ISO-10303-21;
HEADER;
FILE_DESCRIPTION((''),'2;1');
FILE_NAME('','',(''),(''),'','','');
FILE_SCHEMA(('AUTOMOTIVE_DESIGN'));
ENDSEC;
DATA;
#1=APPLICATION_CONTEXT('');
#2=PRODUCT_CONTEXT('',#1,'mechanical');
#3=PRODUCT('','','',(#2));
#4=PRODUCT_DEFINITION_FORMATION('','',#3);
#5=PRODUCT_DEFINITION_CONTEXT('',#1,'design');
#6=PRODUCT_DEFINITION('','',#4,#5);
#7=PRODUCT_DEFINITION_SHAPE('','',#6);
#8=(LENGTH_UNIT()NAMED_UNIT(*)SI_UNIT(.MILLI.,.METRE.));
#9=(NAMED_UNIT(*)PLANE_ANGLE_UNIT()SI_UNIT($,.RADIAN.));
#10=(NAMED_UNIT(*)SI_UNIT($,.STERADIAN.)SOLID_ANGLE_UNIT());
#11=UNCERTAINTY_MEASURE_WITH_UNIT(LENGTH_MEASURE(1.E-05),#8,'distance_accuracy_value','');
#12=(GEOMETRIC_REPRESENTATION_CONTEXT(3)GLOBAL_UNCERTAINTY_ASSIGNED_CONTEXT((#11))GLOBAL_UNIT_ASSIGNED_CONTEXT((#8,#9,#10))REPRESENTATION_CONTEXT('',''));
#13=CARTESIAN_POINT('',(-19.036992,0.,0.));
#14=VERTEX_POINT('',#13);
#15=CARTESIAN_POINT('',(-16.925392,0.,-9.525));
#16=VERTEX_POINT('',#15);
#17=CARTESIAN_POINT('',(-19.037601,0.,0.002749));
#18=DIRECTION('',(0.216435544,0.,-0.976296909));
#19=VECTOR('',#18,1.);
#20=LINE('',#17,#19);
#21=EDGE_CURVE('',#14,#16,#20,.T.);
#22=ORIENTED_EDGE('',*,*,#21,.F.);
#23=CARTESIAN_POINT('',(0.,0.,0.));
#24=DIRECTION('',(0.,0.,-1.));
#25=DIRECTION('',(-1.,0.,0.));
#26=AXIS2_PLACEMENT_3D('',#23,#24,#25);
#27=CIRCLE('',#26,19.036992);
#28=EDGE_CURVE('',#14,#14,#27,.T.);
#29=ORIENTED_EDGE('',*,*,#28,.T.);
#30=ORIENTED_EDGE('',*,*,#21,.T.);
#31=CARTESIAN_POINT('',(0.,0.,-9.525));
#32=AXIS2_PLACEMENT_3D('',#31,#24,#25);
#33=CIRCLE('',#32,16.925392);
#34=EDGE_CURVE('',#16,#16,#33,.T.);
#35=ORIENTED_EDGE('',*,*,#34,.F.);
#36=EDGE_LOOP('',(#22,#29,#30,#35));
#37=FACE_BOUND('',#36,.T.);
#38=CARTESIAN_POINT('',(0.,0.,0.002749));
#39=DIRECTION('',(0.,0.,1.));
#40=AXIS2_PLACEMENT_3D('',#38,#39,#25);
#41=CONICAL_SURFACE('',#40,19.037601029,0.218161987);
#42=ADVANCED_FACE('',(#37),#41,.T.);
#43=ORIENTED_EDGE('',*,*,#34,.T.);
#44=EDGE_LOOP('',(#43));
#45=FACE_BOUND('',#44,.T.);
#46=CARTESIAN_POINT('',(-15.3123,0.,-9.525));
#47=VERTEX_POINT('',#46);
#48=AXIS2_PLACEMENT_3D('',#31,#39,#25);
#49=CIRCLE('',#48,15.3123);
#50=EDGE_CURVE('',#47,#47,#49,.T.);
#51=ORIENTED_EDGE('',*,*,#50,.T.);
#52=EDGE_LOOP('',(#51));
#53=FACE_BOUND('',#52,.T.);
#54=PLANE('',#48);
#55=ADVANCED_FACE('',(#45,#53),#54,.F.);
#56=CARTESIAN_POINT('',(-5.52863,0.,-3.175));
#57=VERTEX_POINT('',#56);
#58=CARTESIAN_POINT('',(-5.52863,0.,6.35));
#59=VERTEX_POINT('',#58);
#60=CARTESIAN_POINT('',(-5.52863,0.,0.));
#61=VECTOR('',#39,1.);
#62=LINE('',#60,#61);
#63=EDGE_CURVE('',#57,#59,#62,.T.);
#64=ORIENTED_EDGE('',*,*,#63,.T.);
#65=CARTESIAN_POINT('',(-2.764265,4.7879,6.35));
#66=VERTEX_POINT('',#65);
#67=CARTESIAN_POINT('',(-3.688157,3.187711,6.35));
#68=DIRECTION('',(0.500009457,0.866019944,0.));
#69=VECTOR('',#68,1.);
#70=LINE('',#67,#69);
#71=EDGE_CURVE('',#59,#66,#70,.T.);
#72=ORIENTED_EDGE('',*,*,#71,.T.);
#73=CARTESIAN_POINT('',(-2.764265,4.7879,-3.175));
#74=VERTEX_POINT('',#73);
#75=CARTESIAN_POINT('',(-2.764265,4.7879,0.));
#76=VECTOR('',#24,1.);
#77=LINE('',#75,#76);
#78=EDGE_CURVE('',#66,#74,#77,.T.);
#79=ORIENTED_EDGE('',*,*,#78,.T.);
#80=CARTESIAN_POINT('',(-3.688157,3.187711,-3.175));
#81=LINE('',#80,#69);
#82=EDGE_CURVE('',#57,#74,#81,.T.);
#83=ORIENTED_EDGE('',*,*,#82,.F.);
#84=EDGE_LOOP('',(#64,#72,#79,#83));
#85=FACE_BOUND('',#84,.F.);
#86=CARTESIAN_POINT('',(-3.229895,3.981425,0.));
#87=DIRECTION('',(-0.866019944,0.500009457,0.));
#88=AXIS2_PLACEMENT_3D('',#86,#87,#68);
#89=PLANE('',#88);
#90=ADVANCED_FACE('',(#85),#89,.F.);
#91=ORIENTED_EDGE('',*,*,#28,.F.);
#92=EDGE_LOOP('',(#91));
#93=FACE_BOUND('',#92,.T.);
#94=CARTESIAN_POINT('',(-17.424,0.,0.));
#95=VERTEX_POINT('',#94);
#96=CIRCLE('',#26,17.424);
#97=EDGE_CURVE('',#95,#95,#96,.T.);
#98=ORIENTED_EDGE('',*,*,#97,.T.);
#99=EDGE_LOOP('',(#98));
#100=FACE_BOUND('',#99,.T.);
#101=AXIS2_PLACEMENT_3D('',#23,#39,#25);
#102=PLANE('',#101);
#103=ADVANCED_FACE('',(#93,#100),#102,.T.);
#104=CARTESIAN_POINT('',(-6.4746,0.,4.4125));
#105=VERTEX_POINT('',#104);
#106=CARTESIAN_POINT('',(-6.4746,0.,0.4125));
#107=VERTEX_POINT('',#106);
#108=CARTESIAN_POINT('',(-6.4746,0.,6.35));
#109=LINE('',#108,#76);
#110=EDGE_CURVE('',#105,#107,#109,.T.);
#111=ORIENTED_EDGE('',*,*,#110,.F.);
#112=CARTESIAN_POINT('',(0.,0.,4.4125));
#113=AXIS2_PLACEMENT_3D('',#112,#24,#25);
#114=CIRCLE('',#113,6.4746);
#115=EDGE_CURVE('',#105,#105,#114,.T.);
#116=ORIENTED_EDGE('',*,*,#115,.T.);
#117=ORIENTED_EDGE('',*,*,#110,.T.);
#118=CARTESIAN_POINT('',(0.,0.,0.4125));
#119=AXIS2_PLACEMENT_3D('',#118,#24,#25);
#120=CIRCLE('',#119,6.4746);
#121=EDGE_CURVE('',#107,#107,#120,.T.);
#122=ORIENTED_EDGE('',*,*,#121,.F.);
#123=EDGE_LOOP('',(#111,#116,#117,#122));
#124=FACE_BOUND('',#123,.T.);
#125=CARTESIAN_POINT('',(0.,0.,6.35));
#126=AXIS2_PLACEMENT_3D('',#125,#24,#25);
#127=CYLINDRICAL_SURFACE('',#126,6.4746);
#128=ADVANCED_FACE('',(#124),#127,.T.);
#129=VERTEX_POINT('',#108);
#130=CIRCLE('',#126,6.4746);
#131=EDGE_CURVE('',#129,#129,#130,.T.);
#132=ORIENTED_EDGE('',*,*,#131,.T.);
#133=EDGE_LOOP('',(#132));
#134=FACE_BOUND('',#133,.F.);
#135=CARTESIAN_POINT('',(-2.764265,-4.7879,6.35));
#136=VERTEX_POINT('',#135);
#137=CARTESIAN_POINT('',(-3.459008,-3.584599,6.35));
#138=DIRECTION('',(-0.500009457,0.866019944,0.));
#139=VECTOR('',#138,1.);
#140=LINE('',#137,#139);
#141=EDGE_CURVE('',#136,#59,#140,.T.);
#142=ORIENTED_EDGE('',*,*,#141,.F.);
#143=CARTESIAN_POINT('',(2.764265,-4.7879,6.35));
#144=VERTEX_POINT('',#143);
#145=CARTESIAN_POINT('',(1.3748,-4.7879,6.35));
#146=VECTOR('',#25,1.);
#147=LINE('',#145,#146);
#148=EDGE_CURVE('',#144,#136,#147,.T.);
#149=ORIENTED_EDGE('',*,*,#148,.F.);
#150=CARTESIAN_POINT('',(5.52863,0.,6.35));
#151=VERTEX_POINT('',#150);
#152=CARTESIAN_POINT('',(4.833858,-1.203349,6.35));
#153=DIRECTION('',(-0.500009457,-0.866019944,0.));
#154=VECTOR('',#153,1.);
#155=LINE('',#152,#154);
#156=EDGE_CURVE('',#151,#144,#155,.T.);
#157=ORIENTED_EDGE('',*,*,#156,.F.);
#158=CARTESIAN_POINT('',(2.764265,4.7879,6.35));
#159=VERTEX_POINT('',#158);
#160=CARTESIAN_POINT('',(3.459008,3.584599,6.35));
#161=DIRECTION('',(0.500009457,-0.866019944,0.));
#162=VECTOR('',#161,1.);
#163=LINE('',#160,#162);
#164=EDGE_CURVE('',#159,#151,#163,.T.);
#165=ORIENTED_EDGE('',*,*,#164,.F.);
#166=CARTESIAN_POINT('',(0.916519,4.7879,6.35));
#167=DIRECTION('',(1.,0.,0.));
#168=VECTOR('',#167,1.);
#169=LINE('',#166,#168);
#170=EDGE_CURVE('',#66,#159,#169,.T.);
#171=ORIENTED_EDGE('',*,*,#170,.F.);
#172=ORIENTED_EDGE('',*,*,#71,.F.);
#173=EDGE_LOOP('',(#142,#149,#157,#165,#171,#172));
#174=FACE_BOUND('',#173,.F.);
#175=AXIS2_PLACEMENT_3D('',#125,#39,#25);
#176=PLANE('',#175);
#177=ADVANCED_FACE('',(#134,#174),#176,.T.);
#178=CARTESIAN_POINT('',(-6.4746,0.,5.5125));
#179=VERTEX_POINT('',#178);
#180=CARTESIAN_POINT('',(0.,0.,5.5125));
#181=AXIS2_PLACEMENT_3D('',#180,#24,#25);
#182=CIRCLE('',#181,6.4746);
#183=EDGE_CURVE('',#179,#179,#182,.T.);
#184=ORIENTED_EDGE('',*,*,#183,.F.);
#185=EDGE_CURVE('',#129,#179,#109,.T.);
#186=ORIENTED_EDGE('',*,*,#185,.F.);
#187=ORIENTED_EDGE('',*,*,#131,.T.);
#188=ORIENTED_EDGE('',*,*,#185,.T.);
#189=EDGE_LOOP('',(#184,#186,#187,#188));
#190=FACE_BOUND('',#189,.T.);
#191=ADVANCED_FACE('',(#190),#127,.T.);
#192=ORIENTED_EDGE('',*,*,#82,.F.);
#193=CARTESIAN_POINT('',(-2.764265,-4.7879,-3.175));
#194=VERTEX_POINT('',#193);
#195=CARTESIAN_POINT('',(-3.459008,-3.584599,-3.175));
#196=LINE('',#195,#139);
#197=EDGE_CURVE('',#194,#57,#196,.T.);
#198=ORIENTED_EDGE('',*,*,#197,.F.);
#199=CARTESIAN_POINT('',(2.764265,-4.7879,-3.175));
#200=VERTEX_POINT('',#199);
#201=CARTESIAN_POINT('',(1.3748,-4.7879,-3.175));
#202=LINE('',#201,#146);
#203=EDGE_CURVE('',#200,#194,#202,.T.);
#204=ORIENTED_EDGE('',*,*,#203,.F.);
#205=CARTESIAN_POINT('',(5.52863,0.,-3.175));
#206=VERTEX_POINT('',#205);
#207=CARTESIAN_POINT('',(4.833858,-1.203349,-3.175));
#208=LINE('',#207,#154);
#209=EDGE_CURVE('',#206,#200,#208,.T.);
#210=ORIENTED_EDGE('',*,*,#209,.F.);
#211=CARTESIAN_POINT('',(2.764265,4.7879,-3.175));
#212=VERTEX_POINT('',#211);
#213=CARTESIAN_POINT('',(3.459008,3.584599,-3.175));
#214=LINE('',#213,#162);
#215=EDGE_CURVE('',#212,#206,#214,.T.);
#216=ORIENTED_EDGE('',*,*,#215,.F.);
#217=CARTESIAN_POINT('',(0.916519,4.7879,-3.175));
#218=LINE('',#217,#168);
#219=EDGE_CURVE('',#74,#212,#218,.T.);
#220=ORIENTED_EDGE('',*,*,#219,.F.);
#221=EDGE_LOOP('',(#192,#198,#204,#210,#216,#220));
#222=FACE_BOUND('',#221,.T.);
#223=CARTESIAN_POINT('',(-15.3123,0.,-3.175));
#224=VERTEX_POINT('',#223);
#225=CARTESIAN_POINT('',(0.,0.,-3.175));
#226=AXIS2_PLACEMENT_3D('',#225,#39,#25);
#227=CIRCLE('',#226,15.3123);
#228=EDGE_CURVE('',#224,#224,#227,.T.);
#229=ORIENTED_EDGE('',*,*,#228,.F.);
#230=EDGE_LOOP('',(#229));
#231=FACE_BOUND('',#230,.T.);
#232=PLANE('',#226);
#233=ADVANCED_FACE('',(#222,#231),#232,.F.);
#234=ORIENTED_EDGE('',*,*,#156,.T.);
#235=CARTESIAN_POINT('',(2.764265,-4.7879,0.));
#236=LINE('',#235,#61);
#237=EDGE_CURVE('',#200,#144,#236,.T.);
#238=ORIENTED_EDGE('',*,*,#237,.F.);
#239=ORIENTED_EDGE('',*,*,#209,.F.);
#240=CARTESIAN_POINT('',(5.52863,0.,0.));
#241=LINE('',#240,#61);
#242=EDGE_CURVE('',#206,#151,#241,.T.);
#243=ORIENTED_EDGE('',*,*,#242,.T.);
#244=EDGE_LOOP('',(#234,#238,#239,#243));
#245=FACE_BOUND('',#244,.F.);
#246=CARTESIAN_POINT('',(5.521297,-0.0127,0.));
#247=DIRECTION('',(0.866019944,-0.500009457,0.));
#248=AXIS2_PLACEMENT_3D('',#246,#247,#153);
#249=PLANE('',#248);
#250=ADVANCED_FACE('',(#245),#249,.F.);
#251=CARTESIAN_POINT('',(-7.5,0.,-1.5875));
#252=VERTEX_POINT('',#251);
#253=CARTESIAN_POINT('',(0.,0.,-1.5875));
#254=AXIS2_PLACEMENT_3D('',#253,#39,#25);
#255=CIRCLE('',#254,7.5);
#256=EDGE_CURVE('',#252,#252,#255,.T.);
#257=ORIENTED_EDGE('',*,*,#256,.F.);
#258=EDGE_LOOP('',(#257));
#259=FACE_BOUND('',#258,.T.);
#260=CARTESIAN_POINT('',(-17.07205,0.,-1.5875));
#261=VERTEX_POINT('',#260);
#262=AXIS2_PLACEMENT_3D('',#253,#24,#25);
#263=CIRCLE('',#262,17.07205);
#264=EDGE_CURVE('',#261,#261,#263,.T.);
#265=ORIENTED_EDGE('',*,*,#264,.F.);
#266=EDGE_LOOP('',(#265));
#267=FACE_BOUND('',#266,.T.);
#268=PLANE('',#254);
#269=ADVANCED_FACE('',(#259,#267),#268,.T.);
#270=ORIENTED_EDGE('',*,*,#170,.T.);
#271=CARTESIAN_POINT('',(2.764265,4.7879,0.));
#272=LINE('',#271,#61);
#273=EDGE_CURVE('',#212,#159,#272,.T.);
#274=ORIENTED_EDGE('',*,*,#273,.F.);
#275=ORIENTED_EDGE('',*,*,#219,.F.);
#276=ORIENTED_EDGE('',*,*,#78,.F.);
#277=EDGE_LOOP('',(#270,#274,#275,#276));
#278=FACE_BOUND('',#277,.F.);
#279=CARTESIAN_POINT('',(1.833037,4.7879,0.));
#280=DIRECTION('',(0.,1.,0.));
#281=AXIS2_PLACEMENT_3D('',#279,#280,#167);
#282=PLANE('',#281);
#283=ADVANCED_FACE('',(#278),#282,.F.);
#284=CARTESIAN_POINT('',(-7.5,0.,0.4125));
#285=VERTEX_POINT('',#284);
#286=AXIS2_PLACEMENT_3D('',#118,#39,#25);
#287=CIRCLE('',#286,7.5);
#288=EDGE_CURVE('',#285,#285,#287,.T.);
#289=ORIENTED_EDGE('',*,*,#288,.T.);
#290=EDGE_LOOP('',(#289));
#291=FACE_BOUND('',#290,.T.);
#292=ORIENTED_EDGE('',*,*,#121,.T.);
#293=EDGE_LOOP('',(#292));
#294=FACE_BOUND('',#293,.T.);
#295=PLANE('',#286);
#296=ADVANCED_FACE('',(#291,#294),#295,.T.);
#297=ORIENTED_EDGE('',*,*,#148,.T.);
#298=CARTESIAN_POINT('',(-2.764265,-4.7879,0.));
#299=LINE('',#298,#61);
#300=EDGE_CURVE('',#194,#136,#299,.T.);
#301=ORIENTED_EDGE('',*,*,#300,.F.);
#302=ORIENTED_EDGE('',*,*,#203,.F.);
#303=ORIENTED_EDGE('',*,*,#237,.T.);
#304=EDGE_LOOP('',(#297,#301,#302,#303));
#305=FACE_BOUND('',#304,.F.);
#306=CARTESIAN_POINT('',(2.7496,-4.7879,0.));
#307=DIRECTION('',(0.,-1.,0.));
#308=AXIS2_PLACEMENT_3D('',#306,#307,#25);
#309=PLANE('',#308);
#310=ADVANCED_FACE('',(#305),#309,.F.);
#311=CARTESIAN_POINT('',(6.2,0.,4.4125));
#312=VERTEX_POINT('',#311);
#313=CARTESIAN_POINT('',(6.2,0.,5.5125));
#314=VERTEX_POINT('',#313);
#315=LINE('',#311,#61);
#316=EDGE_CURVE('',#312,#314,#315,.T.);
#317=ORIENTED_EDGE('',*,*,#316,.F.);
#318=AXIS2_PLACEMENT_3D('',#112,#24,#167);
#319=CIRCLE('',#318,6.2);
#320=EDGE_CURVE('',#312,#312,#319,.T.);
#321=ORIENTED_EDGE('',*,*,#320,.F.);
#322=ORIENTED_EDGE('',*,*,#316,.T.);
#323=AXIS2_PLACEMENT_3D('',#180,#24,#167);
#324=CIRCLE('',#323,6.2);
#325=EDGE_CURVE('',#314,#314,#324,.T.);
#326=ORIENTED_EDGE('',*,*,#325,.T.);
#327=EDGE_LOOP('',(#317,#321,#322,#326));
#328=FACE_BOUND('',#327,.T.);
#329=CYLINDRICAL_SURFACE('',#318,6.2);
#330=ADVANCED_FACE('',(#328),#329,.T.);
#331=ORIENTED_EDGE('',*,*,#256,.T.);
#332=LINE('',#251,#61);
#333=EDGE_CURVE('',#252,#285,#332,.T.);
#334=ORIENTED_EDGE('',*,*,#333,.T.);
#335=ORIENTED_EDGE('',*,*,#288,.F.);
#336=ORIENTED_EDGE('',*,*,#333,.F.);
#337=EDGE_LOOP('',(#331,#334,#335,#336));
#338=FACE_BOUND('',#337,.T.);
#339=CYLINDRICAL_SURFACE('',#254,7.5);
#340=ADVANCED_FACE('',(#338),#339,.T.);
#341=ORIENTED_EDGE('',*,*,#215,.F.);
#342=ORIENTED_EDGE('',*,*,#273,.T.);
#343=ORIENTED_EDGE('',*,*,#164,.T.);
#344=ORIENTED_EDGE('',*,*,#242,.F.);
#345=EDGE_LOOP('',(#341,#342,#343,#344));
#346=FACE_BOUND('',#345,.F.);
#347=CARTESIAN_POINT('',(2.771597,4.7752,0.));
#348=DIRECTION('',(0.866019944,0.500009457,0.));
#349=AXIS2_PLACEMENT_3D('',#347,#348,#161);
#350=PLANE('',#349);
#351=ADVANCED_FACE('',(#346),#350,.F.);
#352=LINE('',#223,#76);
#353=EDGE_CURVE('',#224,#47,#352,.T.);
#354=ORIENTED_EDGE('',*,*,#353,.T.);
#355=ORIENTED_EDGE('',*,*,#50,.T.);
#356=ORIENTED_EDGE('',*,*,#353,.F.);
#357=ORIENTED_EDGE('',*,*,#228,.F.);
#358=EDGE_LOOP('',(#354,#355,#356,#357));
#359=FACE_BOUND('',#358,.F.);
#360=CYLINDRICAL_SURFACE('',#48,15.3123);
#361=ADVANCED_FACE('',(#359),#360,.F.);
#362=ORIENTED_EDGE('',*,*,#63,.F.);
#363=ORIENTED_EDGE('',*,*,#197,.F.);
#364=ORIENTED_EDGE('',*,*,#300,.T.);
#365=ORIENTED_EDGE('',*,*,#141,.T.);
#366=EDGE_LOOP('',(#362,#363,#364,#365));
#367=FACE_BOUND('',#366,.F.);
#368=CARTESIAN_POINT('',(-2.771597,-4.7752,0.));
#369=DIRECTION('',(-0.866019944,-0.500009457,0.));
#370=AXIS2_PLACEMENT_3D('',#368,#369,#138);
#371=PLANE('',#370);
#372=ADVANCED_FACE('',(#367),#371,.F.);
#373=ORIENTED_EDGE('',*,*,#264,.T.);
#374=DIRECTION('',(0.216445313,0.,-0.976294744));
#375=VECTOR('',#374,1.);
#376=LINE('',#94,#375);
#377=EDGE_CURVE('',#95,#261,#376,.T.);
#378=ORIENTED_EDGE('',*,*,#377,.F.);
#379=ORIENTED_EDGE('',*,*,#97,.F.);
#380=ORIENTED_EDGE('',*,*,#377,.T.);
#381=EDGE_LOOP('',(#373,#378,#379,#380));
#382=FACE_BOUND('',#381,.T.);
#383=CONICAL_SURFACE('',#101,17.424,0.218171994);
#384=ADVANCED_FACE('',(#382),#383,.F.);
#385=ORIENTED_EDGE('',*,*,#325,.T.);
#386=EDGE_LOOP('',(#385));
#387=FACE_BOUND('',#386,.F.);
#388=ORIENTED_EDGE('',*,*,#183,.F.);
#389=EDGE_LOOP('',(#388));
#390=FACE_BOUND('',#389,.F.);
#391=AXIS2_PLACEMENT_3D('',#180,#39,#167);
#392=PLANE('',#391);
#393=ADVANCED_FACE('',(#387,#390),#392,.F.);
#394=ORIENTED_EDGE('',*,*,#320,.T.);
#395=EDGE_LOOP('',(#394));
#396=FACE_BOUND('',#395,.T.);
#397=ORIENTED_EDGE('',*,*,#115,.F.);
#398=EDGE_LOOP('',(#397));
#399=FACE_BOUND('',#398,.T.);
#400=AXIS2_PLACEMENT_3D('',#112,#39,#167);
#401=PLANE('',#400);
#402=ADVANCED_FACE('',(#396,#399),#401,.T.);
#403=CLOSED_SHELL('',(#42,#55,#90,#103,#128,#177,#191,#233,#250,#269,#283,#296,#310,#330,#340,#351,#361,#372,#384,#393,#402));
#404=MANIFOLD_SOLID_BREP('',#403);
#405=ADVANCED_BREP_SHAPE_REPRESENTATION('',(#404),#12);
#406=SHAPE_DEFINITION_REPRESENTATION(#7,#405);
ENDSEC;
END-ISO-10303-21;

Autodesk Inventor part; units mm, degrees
ref_plane "YZ Plane" through (0, 0, 0) normal (1, 0, 0) x (0, 1, 0)
ref_plane "XZ Plane" through (0, 0, 0) normal (0, 1, 0) x (-1, 0, 0)
sketch "Sketch4" plane through (0, 0, 0) normal (0, 1, 0) x (-1, 0, 0)
  line L0 (0, 0) -> (6.5, 0) construction
  line L1 (6.5, 0) -> (6.5, -9.525)
  line L2 (6.5, -9.525) -> (0, -9.525)
  line L3 (0, -9.525) -> (0, 0)
  line L4 (0, -9.525) -> (19.05, -9.525)
  line L5 (19.05, -9.525) -> (19.05, 0) construction
  line L6 (19.05, 0) -> (0, 0)
  line L7 (0, 0) -> (0, -9.525) construction
  line L8 (19.05, 0) -> (16.9384, -9.525)
  line L9 (17.424, 0) -> (15.3123, -9.525)
  line L10 (15.6643, -7.9375) -> (6.5, -7.9375)
  line L11 (6.5, -7.9375) -> (7.5, -7.9375)
  line L12 (7.5, -7.9375) -> (7.5, -5.9375)
  line L13 (7.5, -5.9375) -> (6.5, -5.9375)
  line L14 (6.5, -5.9375) -> (6.5, -7.9375)
  line L15 (6.5, 0) -> (0, 0)
  line L16 (0, 0) -> (0, 6.35)
  line L17 (0, 6.35) -> (6.5, 6.35)
  line L18 (6.5, 6.35) -> (6.5, 0)
  line L19 (6.5, -3.175) -> (17.072, -3.175)
  line L20 (17.072, -3.175) -> (17.072, -1.5875) construction
  line L21 (17.072, -1.5875) -> (6.5, -1.5875)
  line L22 (6.5, -1.5875) -> (6.5, -3.175)
  line L23 (6.5, -3.175) -> (0, -3.175)
  line L24 (6.5, -1.5875) -> (7.5, -1.5875)
  line L25 (7.5, -1.5875) -> (7.5, 0.4125)
  line L26 (7.5, 0.4125) -> (6.5, 0.4125)
  line L27 (6.5, 0.4125) -> (6.5, -1.5875)
  line L28 (15.3123, -9.525) -> (15.3123, -3.175)
  point P0 (0, -3.175)
  point P1 (16.7201, -3.175)
  dimension "d28" = 6.5
  dimension "d30" = 19.05
  dimension "d31" = 9.525
  dimension "d32" = 12.5
  dimension "d33" = 1.5875
  dimension "d34" = 1.5875
  dimension "d36" = 1
  dimension "d37" = 2
  dimension "d53" = 6.35
  dimension "d54" = 1.5875
  dimension "d55" = 9.525
  dimension "d56" = 1
  dimension "d57" = 2
revolve "Revolution1" add sketch "Sketch4" angle 360 about axis through (0, 0, -9.525) along (0, 0, 1) contours L6 L25 L21 L1 | L1 L23 L3 L6 | L18 L26 L25 L6 | L6 L16 L17 L18 | L21 L9 L19 L1 | L6 L8 L4 L9 | L19 L9 L10 L28 | L10 L9 L28
sketch "Sketch5" plane through (0, 0, 0) normal (0, 0, 1) x (1, 0, 0)
  circle A0 centre (0, 0) radius 4.7625 construction
  line L0 (0, 0) -> (0, 4.7625) construction
  line L1 (2.7496, 4.7625) -> (5.4993, 0)
  line L2 (5.4993, 0) -> (2.7496, -4.7625)
  line L3 (2.7496, -4.7625) -> (-2.7496, -4.7625)
  line L4 (-2.7496, -4.7625) -> (-5.4993, 0)
  line L5 (-5.4993, 0) -> (-2.7496, 4.7625)
  line L6 (-2.7496, 4.7625) -> (2.7496, 4.7625)
  line L7 (-2.7496, 4.7625) -> (0, 0) construction
  arc A1 (-0.9165, 4.4712) -> (-2.6268, 4.5498) centre (-1.8331, 3.175) ccw
  arc A2 (-0.9165, 4.4712) -> (0, 4.1799) centre (0, 5.7674) ccw
  arc A3 (2.6268, 4.5498) -> (0.9165, 4.4712) centre (1.8331, 3.175) ccw
  arc A4 (0, 4.1799) -> (0.9165, 4.4712) centre (0, 5.7674) ccw
  arc A5 (-4.3304, 1.4418) -> (-5.2537, 0) centre (-3.6662, 0) ccw
  arc A6 (-4.3304, 1.4418) -> (-3.6199, 2.0899) centre (-4.9947, 2.8837) ccw
  arc A7 (-3.6199, 2.0899) -> (-3.4139, 3.0293) centre (-4.9947, 2.8837) ccw
  arc A8 (-2.6268, 4.5498) -> (-3.4139, 3.0293) centre (-1.8331, 3.175) ccw
  arc A9 (-3.4139, -3.0293) -> (-2.6268, -4.5498) centre (-1.8331, -3.175) ccw
  arc A10 (-3.4139, -3.0293) -> (-3.6199, -2.0899) centre (-4.9947, -2.8837) ccw
  arc A11 (-3.6199, -2.0899) -> (-4.3304, -1.4418) centre (-4.9947, -2.8837) ccw
  arc A12 (-5.2537, 0) -> (-4.3304, -1.4418) centre (-3.6662, 0) ccw
  arc A13 (0.9165, -4.4712) -> (2.6268, -4.5498) centre (1.8331, -3.175) ccw
  arc A14 (0.9165, -4.4712) -> (0, -4.1799) centre (0, -5.7674) ccw
  arc A15 (0, -4.1799) -> (-0.9165, -4.4712) centre (0, -5.7674) ccw
  arc A16 (-2.6268, -4.5498) -> (-0.9165, -4.4712) centre (-1.8331, -3.175) ccw
  arc A17 (4.3304, -1.4418) -> (5.2537, 0) centre (3.6662, 0) ccw
  arc A18 (4.3304, -1.4418) -> (3.6199, -2.0899) centre (4.9947, -2.8837) ccw
  arc A19 (3.6199, -2.0899) -> (3.4139, -3.0293) centre (4.9947, -2.8837) ccw
  arc A20 (2.6268, -4.5498) -> (3.4139, -3.0293) centre (1.8331, -3.175) ccw
  arc A21 (3.4139, 3.0293) -> (2.6268, 4.5498) centre (1.8331, 3.175) ccw
  arc A22 (3.4139, 3.0293) -> (3.6199, 2.0899) centre (4.9947, 2.8837) ccw
  arc A23 (3.6199, 2.0899) -> (4.3304, 1.4418) centre (4.9947, 2.8837) ccw
  arc A24 (5.2537, 0) -> (4.3304, 1.4418) centre (3.6662, 0) ccw
  point P0 (-1.8331, 4.7625)
  point P1 (-3.2079, 3.9688)
  point P2 (-5.041, 0.7937)
  point P3 (-5.041, -0.7938)
  point P4 (-3.2079, -3.9687)
  point P5 (-1.8331, -4.7625)
  point P6 (1.8331, -4.7625)
  point P7 (3.2079, -3.9687)
  point P8 (5.041, -0.7937)
  point P9 (5.041, 0.7937)
  point P10 (3.2079, 3.9687)
  point P11 (1.8331, 4.7625)
  dimension "d38" = 9.525
  dimension "d47" = 1.5875
  dimension "d48" = 1.5875
  dimension "d51" = 360
extrude "Extrusion4" cut sketch "Sketch5" along normal through all both and the other way through all
thicken "Thicken3" operation add thickness 0.0254 both sides no extend neighbours yes toward (0.9967573, -0.0804666, 0) faces at (-6.4789, 0.523, 2.3917)
ref_plane "Work Plane1" through (0, 0, 4.4125) normal (0, 0, 1) x (1, 0, 0)
sketch "Sketch6" plane through (0, 0, 4.4125) normal (0, 0, 1) x (1, 0, 0)
  circle A0 centre (0, 0) radius 6.2
  circle A1 centre (0, 0) radius 7.9375
  dimension "d43" = 12.4
  dimension "d44" = 15.875
extrude "Extrusion5" cut sketch "Sketch6" along normal blind 1.1
thicken "Thicken1" operation cut thickness 0.0127 both sides no extend neighbours yes toward (0.9505525, -0.2227193, 0.2164396) faces at (-17.8624, 4.1852, -3.175)
thicken "Thicken4" operation add thickness 0.0254 both sides no extend neighbours yes toward (0, 1, 0) faces at (0.9165, 4.7625, 3.175) (-4.5827, 1.5875, 3.175) (-4.5827, -1.5875, 0) (-0.9165, -4.7625, 0) (4.5827, -1.5875, 3.175) (4.5827, 1.5875, 0)
equation "\"d34\" = d33"
equation "\"d54\" = d34"
equation "\"d55\" = d31"
equation "\"d56\" = d36"
equation "\"d57\" = d37"
equation "\"d48\" = d47"
properties part number "Clutch" material "Stainless Steel"
